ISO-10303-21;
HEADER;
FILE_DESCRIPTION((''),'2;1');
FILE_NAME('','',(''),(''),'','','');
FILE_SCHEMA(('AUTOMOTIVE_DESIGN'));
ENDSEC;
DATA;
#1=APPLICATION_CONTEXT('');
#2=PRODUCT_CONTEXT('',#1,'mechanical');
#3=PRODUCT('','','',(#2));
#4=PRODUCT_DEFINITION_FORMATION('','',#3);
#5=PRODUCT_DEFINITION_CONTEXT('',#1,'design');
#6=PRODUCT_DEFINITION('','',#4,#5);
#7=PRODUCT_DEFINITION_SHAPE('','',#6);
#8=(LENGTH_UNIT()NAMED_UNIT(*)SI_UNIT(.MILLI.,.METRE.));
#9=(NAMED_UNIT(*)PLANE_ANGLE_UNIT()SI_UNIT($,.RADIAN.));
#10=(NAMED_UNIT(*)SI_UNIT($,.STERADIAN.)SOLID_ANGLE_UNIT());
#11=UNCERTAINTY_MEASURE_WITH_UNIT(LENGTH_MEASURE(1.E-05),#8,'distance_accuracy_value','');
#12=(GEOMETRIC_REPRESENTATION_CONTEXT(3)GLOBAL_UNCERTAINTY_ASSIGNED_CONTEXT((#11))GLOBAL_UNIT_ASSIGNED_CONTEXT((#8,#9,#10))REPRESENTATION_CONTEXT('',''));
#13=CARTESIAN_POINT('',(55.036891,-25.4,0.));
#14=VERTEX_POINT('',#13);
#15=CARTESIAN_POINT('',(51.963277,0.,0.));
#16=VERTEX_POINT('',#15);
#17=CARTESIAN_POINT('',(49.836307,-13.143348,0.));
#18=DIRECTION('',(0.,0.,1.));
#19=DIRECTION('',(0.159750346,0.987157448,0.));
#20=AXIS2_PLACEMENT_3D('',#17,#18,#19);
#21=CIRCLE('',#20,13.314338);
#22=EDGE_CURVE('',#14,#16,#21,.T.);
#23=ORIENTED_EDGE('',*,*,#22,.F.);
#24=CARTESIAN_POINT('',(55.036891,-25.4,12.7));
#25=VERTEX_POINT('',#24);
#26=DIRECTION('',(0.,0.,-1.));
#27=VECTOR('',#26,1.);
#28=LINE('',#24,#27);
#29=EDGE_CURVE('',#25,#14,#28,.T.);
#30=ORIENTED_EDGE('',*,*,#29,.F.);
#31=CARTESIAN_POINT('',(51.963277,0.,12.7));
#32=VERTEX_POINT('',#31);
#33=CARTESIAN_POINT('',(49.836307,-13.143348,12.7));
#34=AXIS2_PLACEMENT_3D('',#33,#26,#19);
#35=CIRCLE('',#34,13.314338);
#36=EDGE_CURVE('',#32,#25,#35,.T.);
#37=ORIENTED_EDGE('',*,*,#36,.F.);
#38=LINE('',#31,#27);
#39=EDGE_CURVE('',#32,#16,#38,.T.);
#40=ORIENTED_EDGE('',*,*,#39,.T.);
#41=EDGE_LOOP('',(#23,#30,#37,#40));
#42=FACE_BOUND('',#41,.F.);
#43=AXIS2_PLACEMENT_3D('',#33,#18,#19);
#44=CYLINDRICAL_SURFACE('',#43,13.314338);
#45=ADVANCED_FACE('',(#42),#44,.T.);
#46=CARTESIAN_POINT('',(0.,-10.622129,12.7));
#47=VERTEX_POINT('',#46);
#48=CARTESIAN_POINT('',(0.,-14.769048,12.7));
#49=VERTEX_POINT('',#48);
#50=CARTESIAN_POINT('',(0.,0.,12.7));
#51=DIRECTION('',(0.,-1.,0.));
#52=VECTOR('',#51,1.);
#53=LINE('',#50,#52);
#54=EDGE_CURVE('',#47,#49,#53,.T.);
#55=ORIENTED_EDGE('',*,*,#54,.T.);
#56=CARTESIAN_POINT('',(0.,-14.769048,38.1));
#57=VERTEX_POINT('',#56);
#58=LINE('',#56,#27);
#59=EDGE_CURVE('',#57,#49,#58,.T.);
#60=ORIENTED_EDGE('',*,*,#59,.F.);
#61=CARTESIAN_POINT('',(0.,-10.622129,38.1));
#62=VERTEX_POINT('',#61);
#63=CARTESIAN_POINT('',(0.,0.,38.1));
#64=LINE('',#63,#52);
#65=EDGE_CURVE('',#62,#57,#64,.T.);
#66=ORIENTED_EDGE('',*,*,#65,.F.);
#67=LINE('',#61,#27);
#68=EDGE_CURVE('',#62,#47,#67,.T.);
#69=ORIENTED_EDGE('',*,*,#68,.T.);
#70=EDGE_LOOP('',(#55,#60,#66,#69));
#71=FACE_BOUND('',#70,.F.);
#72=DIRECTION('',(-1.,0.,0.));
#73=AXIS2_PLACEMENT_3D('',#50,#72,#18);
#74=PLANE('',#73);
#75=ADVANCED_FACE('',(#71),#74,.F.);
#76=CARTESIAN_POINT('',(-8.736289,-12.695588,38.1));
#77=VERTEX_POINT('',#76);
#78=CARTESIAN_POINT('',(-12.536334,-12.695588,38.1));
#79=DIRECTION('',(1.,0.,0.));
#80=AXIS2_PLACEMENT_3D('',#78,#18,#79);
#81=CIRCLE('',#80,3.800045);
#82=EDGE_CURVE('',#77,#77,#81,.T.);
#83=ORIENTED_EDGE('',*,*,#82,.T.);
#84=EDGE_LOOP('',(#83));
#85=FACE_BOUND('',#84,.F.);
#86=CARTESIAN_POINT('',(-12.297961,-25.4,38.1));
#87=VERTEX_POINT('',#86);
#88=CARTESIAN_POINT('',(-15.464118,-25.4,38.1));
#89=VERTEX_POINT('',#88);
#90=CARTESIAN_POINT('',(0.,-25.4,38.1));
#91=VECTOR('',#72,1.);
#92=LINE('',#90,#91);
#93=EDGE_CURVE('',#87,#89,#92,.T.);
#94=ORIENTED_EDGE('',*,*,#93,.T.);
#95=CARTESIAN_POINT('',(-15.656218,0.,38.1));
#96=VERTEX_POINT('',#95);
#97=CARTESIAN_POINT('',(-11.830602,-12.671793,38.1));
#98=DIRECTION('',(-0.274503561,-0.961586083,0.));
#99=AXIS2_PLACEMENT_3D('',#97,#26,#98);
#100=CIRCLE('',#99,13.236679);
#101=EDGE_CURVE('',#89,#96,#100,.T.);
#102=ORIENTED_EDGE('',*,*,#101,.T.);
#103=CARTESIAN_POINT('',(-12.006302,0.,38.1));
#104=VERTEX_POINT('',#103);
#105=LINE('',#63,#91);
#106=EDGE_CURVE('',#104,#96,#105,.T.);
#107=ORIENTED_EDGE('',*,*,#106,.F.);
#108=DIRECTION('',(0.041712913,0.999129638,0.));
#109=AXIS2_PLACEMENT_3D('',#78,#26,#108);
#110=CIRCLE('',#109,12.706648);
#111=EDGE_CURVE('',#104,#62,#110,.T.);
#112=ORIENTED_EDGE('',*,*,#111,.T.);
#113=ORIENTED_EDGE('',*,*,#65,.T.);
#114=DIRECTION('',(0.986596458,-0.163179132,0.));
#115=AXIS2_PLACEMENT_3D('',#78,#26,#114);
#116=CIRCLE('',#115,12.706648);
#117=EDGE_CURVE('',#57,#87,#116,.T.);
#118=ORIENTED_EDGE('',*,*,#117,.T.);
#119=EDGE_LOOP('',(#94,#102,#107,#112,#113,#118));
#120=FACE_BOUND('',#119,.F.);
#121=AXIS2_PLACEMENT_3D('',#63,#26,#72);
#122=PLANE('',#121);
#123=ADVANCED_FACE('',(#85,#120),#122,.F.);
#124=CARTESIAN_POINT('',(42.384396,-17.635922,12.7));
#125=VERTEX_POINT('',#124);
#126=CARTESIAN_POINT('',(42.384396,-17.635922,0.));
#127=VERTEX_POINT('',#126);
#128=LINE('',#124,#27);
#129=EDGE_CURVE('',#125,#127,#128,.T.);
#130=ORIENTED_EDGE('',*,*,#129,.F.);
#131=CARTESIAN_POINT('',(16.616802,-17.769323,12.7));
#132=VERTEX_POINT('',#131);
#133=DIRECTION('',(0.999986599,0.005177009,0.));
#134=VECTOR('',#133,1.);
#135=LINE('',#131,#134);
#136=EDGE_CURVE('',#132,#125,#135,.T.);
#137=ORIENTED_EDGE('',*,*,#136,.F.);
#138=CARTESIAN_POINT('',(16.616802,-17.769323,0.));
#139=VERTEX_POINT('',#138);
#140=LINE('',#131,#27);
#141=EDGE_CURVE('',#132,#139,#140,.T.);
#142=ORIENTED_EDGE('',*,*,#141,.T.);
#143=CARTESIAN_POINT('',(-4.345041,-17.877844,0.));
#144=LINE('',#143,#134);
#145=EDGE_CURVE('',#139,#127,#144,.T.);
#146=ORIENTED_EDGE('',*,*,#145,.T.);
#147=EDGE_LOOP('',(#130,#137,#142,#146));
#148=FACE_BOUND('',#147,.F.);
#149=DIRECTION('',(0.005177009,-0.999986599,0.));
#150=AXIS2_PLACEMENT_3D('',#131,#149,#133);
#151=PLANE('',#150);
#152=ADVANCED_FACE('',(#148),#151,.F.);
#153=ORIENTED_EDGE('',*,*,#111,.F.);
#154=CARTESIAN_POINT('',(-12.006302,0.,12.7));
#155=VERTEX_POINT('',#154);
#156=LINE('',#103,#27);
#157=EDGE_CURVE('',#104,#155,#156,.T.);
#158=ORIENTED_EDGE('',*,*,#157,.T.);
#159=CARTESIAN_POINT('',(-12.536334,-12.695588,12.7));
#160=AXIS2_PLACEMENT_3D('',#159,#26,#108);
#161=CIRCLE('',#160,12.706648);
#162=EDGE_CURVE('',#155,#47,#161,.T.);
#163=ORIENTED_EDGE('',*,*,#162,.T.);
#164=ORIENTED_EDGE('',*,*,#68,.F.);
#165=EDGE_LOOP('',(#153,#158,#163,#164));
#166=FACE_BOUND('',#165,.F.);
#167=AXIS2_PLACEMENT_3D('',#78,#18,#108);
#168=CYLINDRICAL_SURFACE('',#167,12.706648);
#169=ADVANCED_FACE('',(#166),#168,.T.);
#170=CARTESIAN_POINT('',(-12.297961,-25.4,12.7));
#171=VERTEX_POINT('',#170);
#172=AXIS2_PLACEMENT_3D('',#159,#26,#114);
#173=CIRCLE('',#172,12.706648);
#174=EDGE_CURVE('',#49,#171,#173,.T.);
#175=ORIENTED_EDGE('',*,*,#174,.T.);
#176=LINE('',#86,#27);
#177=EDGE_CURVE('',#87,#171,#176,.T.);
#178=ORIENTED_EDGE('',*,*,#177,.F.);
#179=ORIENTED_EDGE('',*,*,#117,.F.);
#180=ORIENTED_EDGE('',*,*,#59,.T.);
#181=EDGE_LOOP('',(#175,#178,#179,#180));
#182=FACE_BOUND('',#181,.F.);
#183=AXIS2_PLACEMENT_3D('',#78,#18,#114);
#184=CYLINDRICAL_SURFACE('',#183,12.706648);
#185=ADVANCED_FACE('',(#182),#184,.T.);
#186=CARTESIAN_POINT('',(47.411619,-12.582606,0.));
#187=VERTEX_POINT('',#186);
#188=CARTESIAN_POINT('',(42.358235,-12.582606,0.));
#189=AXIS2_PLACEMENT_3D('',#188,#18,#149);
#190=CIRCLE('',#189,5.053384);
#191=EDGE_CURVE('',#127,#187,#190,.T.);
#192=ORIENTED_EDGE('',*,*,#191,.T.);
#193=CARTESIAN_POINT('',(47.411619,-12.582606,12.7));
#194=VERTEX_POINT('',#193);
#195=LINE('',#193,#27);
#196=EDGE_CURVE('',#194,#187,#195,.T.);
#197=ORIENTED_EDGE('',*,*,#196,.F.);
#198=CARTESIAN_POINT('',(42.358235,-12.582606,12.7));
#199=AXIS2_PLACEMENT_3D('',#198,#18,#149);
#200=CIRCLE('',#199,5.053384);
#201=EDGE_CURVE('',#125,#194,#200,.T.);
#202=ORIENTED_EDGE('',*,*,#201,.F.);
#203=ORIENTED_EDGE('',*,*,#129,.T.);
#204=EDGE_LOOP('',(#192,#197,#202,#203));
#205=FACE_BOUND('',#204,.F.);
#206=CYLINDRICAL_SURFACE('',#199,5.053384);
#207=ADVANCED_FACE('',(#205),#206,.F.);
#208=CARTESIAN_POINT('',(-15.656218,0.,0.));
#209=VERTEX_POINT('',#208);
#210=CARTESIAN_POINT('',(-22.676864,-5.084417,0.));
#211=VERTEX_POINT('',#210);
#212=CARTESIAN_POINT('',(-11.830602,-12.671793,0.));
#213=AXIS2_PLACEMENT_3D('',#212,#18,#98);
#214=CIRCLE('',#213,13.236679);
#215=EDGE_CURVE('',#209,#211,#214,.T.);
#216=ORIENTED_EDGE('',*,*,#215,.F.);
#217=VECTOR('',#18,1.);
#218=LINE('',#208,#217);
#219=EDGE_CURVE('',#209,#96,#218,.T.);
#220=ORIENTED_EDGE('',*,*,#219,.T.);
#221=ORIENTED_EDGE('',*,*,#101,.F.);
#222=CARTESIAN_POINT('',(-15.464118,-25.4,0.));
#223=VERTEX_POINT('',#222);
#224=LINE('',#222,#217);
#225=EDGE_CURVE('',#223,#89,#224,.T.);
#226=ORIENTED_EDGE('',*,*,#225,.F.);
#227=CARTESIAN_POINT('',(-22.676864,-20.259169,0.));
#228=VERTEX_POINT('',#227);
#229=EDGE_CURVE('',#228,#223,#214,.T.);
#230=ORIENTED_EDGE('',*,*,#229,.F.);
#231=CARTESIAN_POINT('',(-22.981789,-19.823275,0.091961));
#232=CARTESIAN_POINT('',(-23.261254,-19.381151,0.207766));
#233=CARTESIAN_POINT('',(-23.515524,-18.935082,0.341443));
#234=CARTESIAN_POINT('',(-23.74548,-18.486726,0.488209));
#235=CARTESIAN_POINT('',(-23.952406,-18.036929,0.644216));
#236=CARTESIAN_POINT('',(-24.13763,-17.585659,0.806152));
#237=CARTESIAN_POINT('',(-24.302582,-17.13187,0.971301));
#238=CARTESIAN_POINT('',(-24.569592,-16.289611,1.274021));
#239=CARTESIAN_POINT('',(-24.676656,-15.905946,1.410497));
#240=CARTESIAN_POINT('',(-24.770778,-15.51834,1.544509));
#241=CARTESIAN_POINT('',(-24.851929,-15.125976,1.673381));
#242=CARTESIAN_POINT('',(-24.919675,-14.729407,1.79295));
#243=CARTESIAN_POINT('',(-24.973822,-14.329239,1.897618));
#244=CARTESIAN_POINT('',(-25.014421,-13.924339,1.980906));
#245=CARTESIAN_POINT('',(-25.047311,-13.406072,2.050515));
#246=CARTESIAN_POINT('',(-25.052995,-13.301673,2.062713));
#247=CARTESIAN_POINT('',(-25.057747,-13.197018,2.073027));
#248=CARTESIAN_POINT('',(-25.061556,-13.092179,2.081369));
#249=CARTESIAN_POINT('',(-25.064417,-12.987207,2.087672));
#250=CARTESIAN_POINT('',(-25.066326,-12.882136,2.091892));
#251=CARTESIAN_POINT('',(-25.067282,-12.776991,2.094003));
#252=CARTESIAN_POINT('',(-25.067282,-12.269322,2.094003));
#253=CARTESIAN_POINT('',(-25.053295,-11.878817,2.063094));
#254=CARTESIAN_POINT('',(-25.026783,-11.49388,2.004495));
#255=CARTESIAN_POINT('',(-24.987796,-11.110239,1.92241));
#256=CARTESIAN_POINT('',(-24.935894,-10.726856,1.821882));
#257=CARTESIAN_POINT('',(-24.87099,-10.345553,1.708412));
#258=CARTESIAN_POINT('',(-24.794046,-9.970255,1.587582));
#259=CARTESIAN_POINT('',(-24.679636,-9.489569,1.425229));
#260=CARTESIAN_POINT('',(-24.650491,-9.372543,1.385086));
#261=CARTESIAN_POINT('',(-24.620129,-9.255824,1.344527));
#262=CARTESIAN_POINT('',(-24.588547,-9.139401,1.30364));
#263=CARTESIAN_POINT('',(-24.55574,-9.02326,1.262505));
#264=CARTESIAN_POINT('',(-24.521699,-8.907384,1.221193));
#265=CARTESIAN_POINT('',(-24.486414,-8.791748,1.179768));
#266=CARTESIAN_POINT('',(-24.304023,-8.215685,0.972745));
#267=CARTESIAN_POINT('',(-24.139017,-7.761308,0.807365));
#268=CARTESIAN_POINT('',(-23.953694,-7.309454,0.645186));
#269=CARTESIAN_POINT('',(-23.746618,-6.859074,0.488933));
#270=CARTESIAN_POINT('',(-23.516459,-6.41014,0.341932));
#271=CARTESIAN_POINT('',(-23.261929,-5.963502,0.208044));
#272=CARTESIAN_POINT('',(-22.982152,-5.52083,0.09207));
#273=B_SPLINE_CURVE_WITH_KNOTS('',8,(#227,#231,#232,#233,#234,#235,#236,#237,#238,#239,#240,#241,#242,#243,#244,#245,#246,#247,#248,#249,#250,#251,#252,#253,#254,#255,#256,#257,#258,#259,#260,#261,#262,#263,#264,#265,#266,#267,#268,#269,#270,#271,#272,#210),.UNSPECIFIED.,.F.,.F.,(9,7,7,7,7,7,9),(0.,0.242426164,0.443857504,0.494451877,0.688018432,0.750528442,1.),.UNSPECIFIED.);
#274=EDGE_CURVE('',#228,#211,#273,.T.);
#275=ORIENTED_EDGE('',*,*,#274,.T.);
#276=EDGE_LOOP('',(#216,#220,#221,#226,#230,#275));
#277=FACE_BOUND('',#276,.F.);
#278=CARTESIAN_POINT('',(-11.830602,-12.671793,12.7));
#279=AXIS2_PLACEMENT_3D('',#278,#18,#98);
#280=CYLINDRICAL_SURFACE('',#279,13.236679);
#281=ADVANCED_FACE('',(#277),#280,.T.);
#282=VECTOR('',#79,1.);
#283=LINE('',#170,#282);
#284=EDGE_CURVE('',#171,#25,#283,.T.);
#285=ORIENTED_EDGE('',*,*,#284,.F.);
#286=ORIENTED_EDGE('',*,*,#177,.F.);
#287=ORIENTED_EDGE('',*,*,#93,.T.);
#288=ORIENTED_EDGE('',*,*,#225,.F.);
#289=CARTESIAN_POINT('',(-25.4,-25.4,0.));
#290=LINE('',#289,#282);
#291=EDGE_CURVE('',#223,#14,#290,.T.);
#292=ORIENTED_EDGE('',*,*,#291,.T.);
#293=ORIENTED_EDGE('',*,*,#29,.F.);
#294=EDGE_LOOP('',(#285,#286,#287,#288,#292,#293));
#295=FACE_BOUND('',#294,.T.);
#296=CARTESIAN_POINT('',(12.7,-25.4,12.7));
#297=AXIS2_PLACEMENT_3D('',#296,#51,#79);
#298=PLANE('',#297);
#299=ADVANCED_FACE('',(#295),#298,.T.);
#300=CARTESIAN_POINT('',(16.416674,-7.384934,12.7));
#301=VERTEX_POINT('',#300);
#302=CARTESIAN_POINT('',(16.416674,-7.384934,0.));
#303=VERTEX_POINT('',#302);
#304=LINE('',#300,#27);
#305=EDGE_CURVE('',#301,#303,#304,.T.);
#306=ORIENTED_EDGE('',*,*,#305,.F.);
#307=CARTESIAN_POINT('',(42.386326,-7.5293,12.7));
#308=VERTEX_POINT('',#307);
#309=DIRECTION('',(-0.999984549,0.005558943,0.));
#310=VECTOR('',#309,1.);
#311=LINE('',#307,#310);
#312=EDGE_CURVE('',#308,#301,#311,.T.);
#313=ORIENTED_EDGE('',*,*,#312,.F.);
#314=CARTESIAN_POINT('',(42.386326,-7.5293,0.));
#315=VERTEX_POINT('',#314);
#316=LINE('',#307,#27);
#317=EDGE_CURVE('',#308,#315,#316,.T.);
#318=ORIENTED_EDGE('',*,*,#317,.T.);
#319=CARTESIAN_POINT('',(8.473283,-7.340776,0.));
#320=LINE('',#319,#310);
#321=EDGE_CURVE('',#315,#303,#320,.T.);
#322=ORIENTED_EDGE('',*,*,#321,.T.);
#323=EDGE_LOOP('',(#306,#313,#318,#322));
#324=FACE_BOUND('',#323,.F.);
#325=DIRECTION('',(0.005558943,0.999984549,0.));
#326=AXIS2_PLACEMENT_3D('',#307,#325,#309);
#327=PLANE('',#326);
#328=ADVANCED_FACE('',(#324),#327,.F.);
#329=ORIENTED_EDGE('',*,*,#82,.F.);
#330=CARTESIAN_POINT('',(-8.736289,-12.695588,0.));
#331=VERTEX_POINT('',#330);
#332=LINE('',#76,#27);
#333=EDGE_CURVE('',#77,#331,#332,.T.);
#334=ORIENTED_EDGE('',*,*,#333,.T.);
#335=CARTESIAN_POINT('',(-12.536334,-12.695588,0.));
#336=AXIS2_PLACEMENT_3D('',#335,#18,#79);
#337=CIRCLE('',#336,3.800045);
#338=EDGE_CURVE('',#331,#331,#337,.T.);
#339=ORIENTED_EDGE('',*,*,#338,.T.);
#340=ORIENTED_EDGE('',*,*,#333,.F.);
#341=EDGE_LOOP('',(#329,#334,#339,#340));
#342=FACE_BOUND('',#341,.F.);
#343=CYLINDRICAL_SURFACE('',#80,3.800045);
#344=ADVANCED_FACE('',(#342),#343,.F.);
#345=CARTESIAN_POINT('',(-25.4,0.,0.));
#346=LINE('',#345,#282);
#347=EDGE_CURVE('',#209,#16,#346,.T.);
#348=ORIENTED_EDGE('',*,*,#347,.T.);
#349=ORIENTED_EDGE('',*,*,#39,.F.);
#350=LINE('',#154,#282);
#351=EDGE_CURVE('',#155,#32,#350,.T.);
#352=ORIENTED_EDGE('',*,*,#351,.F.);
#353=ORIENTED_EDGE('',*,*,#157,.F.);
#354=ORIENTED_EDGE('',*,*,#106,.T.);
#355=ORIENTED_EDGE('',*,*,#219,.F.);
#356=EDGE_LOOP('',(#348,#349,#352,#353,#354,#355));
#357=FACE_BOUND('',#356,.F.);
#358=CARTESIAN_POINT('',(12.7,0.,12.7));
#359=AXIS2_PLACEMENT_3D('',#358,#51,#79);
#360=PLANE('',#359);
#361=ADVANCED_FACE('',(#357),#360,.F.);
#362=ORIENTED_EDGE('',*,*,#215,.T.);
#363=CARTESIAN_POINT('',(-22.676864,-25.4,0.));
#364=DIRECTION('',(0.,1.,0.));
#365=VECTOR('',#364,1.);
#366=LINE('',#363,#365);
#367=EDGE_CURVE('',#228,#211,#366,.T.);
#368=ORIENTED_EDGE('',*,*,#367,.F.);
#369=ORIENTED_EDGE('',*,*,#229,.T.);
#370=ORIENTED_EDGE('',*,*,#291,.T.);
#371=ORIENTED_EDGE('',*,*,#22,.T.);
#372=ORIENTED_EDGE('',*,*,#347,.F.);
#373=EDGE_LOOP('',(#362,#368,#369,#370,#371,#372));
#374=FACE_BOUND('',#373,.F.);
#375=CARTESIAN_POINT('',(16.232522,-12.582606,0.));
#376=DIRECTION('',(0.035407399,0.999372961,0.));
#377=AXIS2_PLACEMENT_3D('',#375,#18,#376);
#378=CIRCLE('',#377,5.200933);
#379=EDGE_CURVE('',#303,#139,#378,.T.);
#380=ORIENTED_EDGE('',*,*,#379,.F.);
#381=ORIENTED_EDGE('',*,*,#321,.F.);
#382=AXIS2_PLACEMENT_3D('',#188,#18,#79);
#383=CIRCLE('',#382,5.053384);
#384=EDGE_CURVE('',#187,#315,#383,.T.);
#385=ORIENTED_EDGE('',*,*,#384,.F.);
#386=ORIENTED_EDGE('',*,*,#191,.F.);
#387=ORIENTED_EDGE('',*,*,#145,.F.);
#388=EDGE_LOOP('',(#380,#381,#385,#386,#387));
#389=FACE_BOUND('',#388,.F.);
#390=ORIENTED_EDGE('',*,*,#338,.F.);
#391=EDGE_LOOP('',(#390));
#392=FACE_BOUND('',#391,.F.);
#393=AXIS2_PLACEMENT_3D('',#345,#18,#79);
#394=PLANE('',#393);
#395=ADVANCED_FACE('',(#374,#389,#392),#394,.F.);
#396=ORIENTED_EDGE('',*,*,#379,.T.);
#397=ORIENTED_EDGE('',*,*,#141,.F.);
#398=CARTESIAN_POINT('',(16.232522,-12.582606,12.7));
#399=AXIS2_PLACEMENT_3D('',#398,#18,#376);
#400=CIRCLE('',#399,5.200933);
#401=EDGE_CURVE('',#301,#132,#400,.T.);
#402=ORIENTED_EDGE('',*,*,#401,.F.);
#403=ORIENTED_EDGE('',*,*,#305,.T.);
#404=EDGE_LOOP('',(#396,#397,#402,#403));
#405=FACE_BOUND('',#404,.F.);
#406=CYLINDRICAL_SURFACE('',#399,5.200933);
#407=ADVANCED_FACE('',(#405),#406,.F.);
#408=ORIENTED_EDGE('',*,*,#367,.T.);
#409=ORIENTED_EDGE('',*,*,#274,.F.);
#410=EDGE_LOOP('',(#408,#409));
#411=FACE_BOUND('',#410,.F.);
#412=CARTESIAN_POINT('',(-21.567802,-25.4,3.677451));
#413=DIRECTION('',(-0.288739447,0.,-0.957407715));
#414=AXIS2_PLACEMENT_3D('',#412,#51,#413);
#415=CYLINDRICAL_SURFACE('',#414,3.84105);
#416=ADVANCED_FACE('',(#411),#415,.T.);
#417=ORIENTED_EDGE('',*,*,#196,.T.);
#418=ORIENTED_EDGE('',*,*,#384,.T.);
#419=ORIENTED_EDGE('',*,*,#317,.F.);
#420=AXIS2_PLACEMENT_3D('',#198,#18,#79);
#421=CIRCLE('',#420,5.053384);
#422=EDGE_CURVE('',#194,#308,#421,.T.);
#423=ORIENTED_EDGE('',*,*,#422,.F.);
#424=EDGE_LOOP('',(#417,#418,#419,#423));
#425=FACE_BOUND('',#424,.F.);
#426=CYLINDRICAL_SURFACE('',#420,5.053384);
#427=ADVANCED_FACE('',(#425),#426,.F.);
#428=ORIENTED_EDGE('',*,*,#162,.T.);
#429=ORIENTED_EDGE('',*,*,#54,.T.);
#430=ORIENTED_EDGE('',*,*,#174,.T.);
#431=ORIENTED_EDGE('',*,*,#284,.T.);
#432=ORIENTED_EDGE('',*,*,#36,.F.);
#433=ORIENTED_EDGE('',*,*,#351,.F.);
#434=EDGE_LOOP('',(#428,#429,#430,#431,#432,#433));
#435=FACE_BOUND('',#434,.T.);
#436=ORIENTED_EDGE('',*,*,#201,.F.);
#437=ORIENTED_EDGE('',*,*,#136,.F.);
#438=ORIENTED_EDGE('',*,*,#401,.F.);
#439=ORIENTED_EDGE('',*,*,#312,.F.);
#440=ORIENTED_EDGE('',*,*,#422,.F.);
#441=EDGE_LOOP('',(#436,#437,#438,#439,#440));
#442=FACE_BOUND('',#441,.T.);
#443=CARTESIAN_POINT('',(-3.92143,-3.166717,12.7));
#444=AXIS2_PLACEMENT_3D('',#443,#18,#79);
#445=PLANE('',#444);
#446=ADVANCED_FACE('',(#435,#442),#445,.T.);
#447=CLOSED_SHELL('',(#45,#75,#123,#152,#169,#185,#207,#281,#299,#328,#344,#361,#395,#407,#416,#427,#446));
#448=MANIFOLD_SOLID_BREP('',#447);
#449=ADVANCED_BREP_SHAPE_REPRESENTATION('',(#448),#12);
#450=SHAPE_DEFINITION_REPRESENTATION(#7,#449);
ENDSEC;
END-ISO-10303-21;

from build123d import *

# Parameters (mm, degrees)
F1_DEPTH  = 25.4
F3_DEPTH  = 25.4
F5_DEPTH  = 25.4
F7_DEPTH  = 25.4
F9_DEPTH  = 50.8
F13_DEPTH = 25.4
F14_R     = 3.8000451494
F15_DEPTH = 76.2
F17_DEPTH = 25.4


# Not quite as in the source:
# - the program builds the solid bodies; features that only make, move or delete a surface that nothing else refers to are left out


with BuildPart() as f1:
    # F0 (on Front) → F1 (new body)
    with BuildSketch(Plane.XZ):
        Polygon((-25.4, 38.1), (-25.4, 0), (63.5, 0), (63.5, 12.7), (0, 12.7), (0, 38.1), align=None)
    extrude(amount=F1_DEPTH)

    # F2 (on face) → F3 (cut)
    with BuildSketch(Plane.XZ.offset(25.4)):
        with BuildLine():
            ThreePointArc((-22.676864444, 0), (-24.571583371, 1.2835083224), (-25.4, 3.4168342035))
            Line((-25.4, 3.4168342035), (-25.4, 0))
            Line((-25.4, 0), (-22.676864444, 0))
        make_face()
    extrude(amount=-F3_DEPTH, mode=Mode.SUBTRACT)

    # F4 (on face) → F5 (cut)
    with BuildSketch(Plane.XY.offset(12.7)):
        with BuildLine():
            ThreePointArc((51.9632771611, 0), (63.0542215265, -11.5438688547), (55.0368912518, -25.4))
            Line((55.0368912518, -25.4), (63.5, -25.4))
            Line((63.5, -25.4), (63.5, 0))
            Line((63.5, 0), (51.9632771611, 0))
        make_face()
    extrude(amount=-F5_DEPTH, mode=Mode.SUBTRACT)

    # F6 (on face) → F7 (cut)
    with BuildSketch(Plane.XY.offset(38.1)):
        with BuildLine():
            ThreePointArc((-15.4641177505, -25.4), (-25.0669029781, -12.7718994312), (-15.6562179327, 0))
            Line((-15.6562179327, 0), (-25.4, 0))
            Line((-25.4, 0), (-25.4, -25.4))
            Line((-25.4, -25.4), (-15.4641177505, -25.4))
        make_face()
    extrude(amount=-F7_DEPTH, mode=Mode.SUBTRACT)

    # F8 (on face) → F9 (cut)
    with BuildSketch(Plane.XY.offset(12.7)):
        with BuildLine():
            Line((-25.4, 0), (-25.4, -25.4))
            Line((-25.4, -25.4), (-15.4641177505, -25.4))
            ThreePointArc((-15.4641177505, -25.4), (-25.0669029781, -12.7718994312), (-15.6562179327, 0))
            Line((-15.6562179327, 0), (-25.4, 0))
        make_face()
    extrude(amount=-F9_DEPTH, mode=Mode.SUBTRACT)

    # F12 (on face) → F13 (cut)
    with BuildSketch(Plane.XY.offset(38.1)):
        with BuildLine():
            ThreePointArc((-12.0063023642, 0), (-4.1167210002, -3.1788126596), (0, -10.6221286028))
            Line((0, -10.6221286028), (0, 0))
            Line((0, 0), (-12.0063023642, 0))
        make_face()
        with BuildLine():
            ThreePointArc((0, -14.7690480964), (-4.2265465157, -22.308409709), (-12.2979614132, -25.4))
            Line((-12.2979614132, -25.4), (0, -25.4))
            Line((0, -25.4), (0, -14.7690480964))
        make_face()
    extrude(amount=-F13_DEPTH, mode=Mode.SUBTRACT)

    # F14 (on face) → F15 (cut)
    with BuildSketch(Plane.XY.offset(38.1)):
        with Locations((-12.53633365, -12.6955883496)):
            Circle(F14_R)
    extrude(amount=-F15_DEPTH, mode=Mode.SUBTRACT)

    # F16 (on face) → F17 (cut)
    with BuildSketch(Plane.XY.offset(12.7)):
        with BuildLine():
            ThreePointArc((16.6168020143, -17.7693230367), (20.0435798879, -16.1217506564), (21.4334555491, -12.5826057047))
            ThreePointArc((21.4334555491, -12.5826057047), (19.9746784977, -8.9706846186), (16.4166737264, -7.3849335457))
            ThreePointArc((16.4166737264, -7.3849335457), (11.0325544335, -12.6828196506), (16.6168020143, -17.7693230367))
        make_face()
        with BuildLine():
            ThreePointArc((47.4116187176, -12.5826057047), (45.9414348271, -9.0192691511), (42.3863259992, -7.5292995919))
            ThreePointArc((42.3863259992, -7.5292995919), (37.304850424, -12.5816406618), (42.3843959412, -17.6359221781))
            ThreePointArc((42.3843959412, -17.6359221781), (45.9407542727, -16.1466264756), (47.4116187176, -12.5826057047))
        make_face()
        with BuildLine():
            ThreePointArc((16.4166737264, -7.3849335457), (19.9746784977, -8.9706846186), (21.4334555491, -12.5826057047))
            ThreePointArc((21.4334555491, -12.5826057047), (20.0435798879, -16.1217506564), (16.6168020143, -17.7693230367))
            Line((16.6168020143, -17.7693230367), (42.3843959412, -17.6359221781))
            ThreePointArc((42.3843959412, -17.6359221781), (37.304850424, -12.5816406618), (42.3863259992, -7.5292995919))
            Line((42.3863259992, -7.5292995919), (16.4166737264, -7.3849335457))
        make_face()
    extrude(amount=-F17_DEPTH, mode=Mode.SUBTRACT)


solid = f1.part
